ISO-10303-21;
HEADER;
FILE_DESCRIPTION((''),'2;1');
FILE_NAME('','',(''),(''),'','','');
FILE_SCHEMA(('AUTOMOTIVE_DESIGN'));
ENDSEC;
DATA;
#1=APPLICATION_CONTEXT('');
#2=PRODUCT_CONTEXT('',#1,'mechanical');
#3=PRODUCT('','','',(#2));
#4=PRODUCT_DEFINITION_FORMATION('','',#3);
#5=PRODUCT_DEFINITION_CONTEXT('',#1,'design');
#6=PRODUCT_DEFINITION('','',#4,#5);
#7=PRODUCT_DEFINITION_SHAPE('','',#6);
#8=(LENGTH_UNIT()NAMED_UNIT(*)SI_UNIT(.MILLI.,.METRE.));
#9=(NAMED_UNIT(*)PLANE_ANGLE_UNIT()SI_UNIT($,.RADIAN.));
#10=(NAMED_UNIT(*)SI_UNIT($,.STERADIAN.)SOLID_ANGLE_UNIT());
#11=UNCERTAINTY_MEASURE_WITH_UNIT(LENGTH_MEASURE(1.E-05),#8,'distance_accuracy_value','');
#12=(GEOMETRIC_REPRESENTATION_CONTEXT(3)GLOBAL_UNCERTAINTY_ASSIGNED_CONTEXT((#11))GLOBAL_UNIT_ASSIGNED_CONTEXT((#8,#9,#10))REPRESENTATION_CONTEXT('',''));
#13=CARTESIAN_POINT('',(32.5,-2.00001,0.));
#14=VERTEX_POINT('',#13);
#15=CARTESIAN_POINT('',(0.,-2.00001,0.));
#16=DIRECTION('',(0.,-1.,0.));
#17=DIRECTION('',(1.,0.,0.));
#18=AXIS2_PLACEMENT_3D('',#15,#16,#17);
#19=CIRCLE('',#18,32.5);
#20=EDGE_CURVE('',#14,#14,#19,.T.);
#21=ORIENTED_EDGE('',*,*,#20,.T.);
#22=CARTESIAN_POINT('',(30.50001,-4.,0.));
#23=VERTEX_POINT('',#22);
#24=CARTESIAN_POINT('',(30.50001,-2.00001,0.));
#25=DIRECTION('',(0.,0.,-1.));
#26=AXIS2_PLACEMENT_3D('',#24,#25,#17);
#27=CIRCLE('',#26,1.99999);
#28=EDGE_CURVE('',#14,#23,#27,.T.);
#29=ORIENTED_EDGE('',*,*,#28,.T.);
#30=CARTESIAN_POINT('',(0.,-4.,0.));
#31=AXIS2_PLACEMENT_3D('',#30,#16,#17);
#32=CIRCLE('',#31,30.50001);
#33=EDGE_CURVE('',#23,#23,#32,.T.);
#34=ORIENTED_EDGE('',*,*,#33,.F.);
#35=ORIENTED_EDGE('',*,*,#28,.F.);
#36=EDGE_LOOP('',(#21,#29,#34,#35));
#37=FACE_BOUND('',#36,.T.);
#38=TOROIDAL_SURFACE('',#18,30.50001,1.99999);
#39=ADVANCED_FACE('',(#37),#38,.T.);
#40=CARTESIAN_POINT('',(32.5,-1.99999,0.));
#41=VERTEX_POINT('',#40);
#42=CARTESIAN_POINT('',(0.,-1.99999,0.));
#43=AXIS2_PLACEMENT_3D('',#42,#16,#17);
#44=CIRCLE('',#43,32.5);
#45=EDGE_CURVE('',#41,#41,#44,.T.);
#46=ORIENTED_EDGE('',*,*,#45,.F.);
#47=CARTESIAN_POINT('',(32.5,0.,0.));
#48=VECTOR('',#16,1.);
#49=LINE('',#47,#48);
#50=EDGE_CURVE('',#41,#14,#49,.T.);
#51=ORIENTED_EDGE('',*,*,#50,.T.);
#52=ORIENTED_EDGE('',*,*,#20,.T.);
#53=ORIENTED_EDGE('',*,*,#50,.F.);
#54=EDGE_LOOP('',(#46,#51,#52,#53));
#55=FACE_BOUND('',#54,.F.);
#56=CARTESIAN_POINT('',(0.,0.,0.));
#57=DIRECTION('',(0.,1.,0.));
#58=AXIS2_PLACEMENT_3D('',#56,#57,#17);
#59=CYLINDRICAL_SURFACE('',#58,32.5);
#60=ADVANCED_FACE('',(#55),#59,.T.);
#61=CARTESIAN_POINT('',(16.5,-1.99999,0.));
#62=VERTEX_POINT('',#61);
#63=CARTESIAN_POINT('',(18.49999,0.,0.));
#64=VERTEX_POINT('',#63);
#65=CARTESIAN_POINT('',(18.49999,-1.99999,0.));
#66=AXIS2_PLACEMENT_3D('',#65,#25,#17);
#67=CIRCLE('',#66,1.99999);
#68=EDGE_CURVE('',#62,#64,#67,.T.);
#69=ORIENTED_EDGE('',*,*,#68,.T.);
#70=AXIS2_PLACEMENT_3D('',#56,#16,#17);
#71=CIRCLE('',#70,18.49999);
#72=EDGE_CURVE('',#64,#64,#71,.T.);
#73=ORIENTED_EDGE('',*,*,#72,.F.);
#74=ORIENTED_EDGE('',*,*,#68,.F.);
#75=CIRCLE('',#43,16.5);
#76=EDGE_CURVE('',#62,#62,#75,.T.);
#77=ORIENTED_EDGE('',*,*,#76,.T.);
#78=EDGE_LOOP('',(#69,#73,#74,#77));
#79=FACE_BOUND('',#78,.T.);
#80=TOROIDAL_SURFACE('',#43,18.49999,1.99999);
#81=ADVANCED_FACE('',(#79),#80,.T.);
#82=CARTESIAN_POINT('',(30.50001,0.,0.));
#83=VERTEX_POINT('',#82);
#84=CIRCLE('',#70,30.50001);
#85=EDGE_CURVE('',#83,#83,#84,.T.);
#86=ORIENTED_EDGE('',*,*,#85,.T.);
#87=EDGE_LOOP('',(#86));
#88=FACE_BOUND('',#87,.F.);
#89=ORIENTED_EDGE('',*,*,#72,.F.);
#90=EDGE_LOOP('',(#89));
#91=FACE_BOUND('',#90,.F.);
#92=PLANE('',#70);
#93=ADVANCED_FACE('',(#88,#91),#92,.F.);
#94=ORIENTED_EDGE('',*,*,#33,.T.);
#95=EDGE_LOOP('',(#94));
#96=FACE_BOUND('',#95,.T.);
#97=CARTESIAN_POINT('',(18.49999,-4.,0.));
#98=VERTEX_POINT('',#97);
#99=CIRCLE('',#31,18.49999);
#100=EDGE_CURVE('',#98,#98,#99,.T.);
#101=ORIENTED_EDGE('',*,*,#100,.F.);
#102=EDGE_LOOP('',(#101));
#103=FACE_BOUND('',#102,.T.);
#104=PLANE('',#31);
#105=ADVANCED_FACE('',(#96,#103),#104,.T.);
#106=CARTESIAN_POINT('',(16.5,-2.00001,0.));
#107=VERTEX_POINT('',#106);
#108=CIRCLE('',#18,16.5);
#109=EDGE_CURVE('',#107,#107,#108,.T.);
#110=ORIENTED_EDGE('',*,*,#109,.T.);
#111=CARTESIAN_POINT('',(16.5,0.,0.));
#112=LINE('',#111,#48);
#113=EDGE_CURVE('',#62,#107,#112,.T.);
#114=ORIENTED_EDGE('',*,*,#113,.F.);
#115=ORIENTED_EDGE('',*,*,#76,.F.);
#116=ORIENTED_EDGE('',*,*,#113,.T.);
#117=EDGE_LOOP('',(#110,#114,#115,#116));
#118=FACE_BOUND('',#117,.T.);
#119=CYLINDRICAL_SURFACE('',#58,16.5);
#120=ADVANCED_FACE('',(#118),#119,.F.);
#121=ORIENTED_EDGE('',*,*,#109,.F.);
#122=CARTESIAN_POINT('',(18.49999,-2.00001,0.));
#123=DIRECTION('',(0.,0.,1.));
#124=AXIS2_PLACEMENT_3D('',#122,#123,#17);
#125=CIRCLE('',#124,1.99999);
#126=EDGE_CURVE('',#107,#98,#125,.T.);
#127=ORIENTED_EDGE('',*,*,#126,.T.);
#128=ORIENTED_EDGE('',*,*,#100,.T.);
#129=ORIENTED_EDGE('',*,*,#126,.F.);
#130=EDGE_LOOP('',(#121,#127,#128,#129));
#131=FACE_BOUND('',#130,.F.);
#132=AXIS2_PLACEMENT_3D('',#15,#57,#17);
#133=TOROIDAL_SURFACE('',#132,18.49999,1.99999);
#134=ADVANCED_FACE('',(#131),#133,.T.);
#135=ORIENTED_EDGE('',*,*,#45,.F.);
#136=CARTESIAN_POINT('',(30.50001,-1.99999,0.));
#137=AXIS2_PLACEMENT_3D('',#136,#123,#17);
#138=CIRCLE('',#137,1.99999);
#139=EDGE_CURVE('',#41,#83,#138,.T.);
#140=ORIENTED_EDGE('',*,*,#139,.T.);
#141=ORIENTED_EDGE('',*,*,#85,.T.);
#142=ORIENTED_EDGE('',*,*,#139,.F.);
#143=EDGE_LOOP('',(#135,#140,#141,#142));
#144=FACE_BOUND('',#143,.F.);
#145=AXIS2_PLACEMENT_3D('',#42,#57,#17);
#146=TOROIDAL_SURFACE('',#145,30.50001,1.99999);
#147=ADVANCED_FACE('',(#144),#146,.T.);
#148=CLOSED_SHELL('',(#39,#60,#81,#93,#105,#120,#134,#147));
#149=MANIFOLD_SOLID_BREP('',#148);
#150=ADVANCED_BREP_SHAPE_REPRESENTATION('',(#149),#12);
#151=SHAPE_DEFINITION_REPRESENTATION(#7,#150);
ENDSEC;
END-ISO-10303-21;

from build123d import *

# Parameters (mm, degrees)
F0_R     = 32.5
F0_R_2   = 16.5
F1_DEPTH = 4
F2_R     = 1.99999


# Not quite as in the source:
# - a fillet or chamfer is up to 0.001 mm smaller than in the source, because OpenCascade refuses the exact size
# - a feature names something its author has since deleted; it is built from what else it names


with BuildPart() as f1:
    # F0 (on Front) → F1 (new body)
    with BuildSketch(Plane.XZ):
        Circle(F0_R)
        Circle(F0_R_2, mode=Mode.SUBTRACT)
    extrude(amount=F1_DEPTH)

    # F2 (radius 2 in the source; OpenCascade refuses exactly that, so slightly less here)
    f2_edges = [f1.edges().sort_by_distance(p)[0] for p in [
        (-32.5, -4, 0),
        (-32.5, 0, 0),
        (-16.5, 0, 0),
        (-16.5, -4, 0),
    ]]
    fillet(f2_edges, radius=F2_R)


solid = f1.part
